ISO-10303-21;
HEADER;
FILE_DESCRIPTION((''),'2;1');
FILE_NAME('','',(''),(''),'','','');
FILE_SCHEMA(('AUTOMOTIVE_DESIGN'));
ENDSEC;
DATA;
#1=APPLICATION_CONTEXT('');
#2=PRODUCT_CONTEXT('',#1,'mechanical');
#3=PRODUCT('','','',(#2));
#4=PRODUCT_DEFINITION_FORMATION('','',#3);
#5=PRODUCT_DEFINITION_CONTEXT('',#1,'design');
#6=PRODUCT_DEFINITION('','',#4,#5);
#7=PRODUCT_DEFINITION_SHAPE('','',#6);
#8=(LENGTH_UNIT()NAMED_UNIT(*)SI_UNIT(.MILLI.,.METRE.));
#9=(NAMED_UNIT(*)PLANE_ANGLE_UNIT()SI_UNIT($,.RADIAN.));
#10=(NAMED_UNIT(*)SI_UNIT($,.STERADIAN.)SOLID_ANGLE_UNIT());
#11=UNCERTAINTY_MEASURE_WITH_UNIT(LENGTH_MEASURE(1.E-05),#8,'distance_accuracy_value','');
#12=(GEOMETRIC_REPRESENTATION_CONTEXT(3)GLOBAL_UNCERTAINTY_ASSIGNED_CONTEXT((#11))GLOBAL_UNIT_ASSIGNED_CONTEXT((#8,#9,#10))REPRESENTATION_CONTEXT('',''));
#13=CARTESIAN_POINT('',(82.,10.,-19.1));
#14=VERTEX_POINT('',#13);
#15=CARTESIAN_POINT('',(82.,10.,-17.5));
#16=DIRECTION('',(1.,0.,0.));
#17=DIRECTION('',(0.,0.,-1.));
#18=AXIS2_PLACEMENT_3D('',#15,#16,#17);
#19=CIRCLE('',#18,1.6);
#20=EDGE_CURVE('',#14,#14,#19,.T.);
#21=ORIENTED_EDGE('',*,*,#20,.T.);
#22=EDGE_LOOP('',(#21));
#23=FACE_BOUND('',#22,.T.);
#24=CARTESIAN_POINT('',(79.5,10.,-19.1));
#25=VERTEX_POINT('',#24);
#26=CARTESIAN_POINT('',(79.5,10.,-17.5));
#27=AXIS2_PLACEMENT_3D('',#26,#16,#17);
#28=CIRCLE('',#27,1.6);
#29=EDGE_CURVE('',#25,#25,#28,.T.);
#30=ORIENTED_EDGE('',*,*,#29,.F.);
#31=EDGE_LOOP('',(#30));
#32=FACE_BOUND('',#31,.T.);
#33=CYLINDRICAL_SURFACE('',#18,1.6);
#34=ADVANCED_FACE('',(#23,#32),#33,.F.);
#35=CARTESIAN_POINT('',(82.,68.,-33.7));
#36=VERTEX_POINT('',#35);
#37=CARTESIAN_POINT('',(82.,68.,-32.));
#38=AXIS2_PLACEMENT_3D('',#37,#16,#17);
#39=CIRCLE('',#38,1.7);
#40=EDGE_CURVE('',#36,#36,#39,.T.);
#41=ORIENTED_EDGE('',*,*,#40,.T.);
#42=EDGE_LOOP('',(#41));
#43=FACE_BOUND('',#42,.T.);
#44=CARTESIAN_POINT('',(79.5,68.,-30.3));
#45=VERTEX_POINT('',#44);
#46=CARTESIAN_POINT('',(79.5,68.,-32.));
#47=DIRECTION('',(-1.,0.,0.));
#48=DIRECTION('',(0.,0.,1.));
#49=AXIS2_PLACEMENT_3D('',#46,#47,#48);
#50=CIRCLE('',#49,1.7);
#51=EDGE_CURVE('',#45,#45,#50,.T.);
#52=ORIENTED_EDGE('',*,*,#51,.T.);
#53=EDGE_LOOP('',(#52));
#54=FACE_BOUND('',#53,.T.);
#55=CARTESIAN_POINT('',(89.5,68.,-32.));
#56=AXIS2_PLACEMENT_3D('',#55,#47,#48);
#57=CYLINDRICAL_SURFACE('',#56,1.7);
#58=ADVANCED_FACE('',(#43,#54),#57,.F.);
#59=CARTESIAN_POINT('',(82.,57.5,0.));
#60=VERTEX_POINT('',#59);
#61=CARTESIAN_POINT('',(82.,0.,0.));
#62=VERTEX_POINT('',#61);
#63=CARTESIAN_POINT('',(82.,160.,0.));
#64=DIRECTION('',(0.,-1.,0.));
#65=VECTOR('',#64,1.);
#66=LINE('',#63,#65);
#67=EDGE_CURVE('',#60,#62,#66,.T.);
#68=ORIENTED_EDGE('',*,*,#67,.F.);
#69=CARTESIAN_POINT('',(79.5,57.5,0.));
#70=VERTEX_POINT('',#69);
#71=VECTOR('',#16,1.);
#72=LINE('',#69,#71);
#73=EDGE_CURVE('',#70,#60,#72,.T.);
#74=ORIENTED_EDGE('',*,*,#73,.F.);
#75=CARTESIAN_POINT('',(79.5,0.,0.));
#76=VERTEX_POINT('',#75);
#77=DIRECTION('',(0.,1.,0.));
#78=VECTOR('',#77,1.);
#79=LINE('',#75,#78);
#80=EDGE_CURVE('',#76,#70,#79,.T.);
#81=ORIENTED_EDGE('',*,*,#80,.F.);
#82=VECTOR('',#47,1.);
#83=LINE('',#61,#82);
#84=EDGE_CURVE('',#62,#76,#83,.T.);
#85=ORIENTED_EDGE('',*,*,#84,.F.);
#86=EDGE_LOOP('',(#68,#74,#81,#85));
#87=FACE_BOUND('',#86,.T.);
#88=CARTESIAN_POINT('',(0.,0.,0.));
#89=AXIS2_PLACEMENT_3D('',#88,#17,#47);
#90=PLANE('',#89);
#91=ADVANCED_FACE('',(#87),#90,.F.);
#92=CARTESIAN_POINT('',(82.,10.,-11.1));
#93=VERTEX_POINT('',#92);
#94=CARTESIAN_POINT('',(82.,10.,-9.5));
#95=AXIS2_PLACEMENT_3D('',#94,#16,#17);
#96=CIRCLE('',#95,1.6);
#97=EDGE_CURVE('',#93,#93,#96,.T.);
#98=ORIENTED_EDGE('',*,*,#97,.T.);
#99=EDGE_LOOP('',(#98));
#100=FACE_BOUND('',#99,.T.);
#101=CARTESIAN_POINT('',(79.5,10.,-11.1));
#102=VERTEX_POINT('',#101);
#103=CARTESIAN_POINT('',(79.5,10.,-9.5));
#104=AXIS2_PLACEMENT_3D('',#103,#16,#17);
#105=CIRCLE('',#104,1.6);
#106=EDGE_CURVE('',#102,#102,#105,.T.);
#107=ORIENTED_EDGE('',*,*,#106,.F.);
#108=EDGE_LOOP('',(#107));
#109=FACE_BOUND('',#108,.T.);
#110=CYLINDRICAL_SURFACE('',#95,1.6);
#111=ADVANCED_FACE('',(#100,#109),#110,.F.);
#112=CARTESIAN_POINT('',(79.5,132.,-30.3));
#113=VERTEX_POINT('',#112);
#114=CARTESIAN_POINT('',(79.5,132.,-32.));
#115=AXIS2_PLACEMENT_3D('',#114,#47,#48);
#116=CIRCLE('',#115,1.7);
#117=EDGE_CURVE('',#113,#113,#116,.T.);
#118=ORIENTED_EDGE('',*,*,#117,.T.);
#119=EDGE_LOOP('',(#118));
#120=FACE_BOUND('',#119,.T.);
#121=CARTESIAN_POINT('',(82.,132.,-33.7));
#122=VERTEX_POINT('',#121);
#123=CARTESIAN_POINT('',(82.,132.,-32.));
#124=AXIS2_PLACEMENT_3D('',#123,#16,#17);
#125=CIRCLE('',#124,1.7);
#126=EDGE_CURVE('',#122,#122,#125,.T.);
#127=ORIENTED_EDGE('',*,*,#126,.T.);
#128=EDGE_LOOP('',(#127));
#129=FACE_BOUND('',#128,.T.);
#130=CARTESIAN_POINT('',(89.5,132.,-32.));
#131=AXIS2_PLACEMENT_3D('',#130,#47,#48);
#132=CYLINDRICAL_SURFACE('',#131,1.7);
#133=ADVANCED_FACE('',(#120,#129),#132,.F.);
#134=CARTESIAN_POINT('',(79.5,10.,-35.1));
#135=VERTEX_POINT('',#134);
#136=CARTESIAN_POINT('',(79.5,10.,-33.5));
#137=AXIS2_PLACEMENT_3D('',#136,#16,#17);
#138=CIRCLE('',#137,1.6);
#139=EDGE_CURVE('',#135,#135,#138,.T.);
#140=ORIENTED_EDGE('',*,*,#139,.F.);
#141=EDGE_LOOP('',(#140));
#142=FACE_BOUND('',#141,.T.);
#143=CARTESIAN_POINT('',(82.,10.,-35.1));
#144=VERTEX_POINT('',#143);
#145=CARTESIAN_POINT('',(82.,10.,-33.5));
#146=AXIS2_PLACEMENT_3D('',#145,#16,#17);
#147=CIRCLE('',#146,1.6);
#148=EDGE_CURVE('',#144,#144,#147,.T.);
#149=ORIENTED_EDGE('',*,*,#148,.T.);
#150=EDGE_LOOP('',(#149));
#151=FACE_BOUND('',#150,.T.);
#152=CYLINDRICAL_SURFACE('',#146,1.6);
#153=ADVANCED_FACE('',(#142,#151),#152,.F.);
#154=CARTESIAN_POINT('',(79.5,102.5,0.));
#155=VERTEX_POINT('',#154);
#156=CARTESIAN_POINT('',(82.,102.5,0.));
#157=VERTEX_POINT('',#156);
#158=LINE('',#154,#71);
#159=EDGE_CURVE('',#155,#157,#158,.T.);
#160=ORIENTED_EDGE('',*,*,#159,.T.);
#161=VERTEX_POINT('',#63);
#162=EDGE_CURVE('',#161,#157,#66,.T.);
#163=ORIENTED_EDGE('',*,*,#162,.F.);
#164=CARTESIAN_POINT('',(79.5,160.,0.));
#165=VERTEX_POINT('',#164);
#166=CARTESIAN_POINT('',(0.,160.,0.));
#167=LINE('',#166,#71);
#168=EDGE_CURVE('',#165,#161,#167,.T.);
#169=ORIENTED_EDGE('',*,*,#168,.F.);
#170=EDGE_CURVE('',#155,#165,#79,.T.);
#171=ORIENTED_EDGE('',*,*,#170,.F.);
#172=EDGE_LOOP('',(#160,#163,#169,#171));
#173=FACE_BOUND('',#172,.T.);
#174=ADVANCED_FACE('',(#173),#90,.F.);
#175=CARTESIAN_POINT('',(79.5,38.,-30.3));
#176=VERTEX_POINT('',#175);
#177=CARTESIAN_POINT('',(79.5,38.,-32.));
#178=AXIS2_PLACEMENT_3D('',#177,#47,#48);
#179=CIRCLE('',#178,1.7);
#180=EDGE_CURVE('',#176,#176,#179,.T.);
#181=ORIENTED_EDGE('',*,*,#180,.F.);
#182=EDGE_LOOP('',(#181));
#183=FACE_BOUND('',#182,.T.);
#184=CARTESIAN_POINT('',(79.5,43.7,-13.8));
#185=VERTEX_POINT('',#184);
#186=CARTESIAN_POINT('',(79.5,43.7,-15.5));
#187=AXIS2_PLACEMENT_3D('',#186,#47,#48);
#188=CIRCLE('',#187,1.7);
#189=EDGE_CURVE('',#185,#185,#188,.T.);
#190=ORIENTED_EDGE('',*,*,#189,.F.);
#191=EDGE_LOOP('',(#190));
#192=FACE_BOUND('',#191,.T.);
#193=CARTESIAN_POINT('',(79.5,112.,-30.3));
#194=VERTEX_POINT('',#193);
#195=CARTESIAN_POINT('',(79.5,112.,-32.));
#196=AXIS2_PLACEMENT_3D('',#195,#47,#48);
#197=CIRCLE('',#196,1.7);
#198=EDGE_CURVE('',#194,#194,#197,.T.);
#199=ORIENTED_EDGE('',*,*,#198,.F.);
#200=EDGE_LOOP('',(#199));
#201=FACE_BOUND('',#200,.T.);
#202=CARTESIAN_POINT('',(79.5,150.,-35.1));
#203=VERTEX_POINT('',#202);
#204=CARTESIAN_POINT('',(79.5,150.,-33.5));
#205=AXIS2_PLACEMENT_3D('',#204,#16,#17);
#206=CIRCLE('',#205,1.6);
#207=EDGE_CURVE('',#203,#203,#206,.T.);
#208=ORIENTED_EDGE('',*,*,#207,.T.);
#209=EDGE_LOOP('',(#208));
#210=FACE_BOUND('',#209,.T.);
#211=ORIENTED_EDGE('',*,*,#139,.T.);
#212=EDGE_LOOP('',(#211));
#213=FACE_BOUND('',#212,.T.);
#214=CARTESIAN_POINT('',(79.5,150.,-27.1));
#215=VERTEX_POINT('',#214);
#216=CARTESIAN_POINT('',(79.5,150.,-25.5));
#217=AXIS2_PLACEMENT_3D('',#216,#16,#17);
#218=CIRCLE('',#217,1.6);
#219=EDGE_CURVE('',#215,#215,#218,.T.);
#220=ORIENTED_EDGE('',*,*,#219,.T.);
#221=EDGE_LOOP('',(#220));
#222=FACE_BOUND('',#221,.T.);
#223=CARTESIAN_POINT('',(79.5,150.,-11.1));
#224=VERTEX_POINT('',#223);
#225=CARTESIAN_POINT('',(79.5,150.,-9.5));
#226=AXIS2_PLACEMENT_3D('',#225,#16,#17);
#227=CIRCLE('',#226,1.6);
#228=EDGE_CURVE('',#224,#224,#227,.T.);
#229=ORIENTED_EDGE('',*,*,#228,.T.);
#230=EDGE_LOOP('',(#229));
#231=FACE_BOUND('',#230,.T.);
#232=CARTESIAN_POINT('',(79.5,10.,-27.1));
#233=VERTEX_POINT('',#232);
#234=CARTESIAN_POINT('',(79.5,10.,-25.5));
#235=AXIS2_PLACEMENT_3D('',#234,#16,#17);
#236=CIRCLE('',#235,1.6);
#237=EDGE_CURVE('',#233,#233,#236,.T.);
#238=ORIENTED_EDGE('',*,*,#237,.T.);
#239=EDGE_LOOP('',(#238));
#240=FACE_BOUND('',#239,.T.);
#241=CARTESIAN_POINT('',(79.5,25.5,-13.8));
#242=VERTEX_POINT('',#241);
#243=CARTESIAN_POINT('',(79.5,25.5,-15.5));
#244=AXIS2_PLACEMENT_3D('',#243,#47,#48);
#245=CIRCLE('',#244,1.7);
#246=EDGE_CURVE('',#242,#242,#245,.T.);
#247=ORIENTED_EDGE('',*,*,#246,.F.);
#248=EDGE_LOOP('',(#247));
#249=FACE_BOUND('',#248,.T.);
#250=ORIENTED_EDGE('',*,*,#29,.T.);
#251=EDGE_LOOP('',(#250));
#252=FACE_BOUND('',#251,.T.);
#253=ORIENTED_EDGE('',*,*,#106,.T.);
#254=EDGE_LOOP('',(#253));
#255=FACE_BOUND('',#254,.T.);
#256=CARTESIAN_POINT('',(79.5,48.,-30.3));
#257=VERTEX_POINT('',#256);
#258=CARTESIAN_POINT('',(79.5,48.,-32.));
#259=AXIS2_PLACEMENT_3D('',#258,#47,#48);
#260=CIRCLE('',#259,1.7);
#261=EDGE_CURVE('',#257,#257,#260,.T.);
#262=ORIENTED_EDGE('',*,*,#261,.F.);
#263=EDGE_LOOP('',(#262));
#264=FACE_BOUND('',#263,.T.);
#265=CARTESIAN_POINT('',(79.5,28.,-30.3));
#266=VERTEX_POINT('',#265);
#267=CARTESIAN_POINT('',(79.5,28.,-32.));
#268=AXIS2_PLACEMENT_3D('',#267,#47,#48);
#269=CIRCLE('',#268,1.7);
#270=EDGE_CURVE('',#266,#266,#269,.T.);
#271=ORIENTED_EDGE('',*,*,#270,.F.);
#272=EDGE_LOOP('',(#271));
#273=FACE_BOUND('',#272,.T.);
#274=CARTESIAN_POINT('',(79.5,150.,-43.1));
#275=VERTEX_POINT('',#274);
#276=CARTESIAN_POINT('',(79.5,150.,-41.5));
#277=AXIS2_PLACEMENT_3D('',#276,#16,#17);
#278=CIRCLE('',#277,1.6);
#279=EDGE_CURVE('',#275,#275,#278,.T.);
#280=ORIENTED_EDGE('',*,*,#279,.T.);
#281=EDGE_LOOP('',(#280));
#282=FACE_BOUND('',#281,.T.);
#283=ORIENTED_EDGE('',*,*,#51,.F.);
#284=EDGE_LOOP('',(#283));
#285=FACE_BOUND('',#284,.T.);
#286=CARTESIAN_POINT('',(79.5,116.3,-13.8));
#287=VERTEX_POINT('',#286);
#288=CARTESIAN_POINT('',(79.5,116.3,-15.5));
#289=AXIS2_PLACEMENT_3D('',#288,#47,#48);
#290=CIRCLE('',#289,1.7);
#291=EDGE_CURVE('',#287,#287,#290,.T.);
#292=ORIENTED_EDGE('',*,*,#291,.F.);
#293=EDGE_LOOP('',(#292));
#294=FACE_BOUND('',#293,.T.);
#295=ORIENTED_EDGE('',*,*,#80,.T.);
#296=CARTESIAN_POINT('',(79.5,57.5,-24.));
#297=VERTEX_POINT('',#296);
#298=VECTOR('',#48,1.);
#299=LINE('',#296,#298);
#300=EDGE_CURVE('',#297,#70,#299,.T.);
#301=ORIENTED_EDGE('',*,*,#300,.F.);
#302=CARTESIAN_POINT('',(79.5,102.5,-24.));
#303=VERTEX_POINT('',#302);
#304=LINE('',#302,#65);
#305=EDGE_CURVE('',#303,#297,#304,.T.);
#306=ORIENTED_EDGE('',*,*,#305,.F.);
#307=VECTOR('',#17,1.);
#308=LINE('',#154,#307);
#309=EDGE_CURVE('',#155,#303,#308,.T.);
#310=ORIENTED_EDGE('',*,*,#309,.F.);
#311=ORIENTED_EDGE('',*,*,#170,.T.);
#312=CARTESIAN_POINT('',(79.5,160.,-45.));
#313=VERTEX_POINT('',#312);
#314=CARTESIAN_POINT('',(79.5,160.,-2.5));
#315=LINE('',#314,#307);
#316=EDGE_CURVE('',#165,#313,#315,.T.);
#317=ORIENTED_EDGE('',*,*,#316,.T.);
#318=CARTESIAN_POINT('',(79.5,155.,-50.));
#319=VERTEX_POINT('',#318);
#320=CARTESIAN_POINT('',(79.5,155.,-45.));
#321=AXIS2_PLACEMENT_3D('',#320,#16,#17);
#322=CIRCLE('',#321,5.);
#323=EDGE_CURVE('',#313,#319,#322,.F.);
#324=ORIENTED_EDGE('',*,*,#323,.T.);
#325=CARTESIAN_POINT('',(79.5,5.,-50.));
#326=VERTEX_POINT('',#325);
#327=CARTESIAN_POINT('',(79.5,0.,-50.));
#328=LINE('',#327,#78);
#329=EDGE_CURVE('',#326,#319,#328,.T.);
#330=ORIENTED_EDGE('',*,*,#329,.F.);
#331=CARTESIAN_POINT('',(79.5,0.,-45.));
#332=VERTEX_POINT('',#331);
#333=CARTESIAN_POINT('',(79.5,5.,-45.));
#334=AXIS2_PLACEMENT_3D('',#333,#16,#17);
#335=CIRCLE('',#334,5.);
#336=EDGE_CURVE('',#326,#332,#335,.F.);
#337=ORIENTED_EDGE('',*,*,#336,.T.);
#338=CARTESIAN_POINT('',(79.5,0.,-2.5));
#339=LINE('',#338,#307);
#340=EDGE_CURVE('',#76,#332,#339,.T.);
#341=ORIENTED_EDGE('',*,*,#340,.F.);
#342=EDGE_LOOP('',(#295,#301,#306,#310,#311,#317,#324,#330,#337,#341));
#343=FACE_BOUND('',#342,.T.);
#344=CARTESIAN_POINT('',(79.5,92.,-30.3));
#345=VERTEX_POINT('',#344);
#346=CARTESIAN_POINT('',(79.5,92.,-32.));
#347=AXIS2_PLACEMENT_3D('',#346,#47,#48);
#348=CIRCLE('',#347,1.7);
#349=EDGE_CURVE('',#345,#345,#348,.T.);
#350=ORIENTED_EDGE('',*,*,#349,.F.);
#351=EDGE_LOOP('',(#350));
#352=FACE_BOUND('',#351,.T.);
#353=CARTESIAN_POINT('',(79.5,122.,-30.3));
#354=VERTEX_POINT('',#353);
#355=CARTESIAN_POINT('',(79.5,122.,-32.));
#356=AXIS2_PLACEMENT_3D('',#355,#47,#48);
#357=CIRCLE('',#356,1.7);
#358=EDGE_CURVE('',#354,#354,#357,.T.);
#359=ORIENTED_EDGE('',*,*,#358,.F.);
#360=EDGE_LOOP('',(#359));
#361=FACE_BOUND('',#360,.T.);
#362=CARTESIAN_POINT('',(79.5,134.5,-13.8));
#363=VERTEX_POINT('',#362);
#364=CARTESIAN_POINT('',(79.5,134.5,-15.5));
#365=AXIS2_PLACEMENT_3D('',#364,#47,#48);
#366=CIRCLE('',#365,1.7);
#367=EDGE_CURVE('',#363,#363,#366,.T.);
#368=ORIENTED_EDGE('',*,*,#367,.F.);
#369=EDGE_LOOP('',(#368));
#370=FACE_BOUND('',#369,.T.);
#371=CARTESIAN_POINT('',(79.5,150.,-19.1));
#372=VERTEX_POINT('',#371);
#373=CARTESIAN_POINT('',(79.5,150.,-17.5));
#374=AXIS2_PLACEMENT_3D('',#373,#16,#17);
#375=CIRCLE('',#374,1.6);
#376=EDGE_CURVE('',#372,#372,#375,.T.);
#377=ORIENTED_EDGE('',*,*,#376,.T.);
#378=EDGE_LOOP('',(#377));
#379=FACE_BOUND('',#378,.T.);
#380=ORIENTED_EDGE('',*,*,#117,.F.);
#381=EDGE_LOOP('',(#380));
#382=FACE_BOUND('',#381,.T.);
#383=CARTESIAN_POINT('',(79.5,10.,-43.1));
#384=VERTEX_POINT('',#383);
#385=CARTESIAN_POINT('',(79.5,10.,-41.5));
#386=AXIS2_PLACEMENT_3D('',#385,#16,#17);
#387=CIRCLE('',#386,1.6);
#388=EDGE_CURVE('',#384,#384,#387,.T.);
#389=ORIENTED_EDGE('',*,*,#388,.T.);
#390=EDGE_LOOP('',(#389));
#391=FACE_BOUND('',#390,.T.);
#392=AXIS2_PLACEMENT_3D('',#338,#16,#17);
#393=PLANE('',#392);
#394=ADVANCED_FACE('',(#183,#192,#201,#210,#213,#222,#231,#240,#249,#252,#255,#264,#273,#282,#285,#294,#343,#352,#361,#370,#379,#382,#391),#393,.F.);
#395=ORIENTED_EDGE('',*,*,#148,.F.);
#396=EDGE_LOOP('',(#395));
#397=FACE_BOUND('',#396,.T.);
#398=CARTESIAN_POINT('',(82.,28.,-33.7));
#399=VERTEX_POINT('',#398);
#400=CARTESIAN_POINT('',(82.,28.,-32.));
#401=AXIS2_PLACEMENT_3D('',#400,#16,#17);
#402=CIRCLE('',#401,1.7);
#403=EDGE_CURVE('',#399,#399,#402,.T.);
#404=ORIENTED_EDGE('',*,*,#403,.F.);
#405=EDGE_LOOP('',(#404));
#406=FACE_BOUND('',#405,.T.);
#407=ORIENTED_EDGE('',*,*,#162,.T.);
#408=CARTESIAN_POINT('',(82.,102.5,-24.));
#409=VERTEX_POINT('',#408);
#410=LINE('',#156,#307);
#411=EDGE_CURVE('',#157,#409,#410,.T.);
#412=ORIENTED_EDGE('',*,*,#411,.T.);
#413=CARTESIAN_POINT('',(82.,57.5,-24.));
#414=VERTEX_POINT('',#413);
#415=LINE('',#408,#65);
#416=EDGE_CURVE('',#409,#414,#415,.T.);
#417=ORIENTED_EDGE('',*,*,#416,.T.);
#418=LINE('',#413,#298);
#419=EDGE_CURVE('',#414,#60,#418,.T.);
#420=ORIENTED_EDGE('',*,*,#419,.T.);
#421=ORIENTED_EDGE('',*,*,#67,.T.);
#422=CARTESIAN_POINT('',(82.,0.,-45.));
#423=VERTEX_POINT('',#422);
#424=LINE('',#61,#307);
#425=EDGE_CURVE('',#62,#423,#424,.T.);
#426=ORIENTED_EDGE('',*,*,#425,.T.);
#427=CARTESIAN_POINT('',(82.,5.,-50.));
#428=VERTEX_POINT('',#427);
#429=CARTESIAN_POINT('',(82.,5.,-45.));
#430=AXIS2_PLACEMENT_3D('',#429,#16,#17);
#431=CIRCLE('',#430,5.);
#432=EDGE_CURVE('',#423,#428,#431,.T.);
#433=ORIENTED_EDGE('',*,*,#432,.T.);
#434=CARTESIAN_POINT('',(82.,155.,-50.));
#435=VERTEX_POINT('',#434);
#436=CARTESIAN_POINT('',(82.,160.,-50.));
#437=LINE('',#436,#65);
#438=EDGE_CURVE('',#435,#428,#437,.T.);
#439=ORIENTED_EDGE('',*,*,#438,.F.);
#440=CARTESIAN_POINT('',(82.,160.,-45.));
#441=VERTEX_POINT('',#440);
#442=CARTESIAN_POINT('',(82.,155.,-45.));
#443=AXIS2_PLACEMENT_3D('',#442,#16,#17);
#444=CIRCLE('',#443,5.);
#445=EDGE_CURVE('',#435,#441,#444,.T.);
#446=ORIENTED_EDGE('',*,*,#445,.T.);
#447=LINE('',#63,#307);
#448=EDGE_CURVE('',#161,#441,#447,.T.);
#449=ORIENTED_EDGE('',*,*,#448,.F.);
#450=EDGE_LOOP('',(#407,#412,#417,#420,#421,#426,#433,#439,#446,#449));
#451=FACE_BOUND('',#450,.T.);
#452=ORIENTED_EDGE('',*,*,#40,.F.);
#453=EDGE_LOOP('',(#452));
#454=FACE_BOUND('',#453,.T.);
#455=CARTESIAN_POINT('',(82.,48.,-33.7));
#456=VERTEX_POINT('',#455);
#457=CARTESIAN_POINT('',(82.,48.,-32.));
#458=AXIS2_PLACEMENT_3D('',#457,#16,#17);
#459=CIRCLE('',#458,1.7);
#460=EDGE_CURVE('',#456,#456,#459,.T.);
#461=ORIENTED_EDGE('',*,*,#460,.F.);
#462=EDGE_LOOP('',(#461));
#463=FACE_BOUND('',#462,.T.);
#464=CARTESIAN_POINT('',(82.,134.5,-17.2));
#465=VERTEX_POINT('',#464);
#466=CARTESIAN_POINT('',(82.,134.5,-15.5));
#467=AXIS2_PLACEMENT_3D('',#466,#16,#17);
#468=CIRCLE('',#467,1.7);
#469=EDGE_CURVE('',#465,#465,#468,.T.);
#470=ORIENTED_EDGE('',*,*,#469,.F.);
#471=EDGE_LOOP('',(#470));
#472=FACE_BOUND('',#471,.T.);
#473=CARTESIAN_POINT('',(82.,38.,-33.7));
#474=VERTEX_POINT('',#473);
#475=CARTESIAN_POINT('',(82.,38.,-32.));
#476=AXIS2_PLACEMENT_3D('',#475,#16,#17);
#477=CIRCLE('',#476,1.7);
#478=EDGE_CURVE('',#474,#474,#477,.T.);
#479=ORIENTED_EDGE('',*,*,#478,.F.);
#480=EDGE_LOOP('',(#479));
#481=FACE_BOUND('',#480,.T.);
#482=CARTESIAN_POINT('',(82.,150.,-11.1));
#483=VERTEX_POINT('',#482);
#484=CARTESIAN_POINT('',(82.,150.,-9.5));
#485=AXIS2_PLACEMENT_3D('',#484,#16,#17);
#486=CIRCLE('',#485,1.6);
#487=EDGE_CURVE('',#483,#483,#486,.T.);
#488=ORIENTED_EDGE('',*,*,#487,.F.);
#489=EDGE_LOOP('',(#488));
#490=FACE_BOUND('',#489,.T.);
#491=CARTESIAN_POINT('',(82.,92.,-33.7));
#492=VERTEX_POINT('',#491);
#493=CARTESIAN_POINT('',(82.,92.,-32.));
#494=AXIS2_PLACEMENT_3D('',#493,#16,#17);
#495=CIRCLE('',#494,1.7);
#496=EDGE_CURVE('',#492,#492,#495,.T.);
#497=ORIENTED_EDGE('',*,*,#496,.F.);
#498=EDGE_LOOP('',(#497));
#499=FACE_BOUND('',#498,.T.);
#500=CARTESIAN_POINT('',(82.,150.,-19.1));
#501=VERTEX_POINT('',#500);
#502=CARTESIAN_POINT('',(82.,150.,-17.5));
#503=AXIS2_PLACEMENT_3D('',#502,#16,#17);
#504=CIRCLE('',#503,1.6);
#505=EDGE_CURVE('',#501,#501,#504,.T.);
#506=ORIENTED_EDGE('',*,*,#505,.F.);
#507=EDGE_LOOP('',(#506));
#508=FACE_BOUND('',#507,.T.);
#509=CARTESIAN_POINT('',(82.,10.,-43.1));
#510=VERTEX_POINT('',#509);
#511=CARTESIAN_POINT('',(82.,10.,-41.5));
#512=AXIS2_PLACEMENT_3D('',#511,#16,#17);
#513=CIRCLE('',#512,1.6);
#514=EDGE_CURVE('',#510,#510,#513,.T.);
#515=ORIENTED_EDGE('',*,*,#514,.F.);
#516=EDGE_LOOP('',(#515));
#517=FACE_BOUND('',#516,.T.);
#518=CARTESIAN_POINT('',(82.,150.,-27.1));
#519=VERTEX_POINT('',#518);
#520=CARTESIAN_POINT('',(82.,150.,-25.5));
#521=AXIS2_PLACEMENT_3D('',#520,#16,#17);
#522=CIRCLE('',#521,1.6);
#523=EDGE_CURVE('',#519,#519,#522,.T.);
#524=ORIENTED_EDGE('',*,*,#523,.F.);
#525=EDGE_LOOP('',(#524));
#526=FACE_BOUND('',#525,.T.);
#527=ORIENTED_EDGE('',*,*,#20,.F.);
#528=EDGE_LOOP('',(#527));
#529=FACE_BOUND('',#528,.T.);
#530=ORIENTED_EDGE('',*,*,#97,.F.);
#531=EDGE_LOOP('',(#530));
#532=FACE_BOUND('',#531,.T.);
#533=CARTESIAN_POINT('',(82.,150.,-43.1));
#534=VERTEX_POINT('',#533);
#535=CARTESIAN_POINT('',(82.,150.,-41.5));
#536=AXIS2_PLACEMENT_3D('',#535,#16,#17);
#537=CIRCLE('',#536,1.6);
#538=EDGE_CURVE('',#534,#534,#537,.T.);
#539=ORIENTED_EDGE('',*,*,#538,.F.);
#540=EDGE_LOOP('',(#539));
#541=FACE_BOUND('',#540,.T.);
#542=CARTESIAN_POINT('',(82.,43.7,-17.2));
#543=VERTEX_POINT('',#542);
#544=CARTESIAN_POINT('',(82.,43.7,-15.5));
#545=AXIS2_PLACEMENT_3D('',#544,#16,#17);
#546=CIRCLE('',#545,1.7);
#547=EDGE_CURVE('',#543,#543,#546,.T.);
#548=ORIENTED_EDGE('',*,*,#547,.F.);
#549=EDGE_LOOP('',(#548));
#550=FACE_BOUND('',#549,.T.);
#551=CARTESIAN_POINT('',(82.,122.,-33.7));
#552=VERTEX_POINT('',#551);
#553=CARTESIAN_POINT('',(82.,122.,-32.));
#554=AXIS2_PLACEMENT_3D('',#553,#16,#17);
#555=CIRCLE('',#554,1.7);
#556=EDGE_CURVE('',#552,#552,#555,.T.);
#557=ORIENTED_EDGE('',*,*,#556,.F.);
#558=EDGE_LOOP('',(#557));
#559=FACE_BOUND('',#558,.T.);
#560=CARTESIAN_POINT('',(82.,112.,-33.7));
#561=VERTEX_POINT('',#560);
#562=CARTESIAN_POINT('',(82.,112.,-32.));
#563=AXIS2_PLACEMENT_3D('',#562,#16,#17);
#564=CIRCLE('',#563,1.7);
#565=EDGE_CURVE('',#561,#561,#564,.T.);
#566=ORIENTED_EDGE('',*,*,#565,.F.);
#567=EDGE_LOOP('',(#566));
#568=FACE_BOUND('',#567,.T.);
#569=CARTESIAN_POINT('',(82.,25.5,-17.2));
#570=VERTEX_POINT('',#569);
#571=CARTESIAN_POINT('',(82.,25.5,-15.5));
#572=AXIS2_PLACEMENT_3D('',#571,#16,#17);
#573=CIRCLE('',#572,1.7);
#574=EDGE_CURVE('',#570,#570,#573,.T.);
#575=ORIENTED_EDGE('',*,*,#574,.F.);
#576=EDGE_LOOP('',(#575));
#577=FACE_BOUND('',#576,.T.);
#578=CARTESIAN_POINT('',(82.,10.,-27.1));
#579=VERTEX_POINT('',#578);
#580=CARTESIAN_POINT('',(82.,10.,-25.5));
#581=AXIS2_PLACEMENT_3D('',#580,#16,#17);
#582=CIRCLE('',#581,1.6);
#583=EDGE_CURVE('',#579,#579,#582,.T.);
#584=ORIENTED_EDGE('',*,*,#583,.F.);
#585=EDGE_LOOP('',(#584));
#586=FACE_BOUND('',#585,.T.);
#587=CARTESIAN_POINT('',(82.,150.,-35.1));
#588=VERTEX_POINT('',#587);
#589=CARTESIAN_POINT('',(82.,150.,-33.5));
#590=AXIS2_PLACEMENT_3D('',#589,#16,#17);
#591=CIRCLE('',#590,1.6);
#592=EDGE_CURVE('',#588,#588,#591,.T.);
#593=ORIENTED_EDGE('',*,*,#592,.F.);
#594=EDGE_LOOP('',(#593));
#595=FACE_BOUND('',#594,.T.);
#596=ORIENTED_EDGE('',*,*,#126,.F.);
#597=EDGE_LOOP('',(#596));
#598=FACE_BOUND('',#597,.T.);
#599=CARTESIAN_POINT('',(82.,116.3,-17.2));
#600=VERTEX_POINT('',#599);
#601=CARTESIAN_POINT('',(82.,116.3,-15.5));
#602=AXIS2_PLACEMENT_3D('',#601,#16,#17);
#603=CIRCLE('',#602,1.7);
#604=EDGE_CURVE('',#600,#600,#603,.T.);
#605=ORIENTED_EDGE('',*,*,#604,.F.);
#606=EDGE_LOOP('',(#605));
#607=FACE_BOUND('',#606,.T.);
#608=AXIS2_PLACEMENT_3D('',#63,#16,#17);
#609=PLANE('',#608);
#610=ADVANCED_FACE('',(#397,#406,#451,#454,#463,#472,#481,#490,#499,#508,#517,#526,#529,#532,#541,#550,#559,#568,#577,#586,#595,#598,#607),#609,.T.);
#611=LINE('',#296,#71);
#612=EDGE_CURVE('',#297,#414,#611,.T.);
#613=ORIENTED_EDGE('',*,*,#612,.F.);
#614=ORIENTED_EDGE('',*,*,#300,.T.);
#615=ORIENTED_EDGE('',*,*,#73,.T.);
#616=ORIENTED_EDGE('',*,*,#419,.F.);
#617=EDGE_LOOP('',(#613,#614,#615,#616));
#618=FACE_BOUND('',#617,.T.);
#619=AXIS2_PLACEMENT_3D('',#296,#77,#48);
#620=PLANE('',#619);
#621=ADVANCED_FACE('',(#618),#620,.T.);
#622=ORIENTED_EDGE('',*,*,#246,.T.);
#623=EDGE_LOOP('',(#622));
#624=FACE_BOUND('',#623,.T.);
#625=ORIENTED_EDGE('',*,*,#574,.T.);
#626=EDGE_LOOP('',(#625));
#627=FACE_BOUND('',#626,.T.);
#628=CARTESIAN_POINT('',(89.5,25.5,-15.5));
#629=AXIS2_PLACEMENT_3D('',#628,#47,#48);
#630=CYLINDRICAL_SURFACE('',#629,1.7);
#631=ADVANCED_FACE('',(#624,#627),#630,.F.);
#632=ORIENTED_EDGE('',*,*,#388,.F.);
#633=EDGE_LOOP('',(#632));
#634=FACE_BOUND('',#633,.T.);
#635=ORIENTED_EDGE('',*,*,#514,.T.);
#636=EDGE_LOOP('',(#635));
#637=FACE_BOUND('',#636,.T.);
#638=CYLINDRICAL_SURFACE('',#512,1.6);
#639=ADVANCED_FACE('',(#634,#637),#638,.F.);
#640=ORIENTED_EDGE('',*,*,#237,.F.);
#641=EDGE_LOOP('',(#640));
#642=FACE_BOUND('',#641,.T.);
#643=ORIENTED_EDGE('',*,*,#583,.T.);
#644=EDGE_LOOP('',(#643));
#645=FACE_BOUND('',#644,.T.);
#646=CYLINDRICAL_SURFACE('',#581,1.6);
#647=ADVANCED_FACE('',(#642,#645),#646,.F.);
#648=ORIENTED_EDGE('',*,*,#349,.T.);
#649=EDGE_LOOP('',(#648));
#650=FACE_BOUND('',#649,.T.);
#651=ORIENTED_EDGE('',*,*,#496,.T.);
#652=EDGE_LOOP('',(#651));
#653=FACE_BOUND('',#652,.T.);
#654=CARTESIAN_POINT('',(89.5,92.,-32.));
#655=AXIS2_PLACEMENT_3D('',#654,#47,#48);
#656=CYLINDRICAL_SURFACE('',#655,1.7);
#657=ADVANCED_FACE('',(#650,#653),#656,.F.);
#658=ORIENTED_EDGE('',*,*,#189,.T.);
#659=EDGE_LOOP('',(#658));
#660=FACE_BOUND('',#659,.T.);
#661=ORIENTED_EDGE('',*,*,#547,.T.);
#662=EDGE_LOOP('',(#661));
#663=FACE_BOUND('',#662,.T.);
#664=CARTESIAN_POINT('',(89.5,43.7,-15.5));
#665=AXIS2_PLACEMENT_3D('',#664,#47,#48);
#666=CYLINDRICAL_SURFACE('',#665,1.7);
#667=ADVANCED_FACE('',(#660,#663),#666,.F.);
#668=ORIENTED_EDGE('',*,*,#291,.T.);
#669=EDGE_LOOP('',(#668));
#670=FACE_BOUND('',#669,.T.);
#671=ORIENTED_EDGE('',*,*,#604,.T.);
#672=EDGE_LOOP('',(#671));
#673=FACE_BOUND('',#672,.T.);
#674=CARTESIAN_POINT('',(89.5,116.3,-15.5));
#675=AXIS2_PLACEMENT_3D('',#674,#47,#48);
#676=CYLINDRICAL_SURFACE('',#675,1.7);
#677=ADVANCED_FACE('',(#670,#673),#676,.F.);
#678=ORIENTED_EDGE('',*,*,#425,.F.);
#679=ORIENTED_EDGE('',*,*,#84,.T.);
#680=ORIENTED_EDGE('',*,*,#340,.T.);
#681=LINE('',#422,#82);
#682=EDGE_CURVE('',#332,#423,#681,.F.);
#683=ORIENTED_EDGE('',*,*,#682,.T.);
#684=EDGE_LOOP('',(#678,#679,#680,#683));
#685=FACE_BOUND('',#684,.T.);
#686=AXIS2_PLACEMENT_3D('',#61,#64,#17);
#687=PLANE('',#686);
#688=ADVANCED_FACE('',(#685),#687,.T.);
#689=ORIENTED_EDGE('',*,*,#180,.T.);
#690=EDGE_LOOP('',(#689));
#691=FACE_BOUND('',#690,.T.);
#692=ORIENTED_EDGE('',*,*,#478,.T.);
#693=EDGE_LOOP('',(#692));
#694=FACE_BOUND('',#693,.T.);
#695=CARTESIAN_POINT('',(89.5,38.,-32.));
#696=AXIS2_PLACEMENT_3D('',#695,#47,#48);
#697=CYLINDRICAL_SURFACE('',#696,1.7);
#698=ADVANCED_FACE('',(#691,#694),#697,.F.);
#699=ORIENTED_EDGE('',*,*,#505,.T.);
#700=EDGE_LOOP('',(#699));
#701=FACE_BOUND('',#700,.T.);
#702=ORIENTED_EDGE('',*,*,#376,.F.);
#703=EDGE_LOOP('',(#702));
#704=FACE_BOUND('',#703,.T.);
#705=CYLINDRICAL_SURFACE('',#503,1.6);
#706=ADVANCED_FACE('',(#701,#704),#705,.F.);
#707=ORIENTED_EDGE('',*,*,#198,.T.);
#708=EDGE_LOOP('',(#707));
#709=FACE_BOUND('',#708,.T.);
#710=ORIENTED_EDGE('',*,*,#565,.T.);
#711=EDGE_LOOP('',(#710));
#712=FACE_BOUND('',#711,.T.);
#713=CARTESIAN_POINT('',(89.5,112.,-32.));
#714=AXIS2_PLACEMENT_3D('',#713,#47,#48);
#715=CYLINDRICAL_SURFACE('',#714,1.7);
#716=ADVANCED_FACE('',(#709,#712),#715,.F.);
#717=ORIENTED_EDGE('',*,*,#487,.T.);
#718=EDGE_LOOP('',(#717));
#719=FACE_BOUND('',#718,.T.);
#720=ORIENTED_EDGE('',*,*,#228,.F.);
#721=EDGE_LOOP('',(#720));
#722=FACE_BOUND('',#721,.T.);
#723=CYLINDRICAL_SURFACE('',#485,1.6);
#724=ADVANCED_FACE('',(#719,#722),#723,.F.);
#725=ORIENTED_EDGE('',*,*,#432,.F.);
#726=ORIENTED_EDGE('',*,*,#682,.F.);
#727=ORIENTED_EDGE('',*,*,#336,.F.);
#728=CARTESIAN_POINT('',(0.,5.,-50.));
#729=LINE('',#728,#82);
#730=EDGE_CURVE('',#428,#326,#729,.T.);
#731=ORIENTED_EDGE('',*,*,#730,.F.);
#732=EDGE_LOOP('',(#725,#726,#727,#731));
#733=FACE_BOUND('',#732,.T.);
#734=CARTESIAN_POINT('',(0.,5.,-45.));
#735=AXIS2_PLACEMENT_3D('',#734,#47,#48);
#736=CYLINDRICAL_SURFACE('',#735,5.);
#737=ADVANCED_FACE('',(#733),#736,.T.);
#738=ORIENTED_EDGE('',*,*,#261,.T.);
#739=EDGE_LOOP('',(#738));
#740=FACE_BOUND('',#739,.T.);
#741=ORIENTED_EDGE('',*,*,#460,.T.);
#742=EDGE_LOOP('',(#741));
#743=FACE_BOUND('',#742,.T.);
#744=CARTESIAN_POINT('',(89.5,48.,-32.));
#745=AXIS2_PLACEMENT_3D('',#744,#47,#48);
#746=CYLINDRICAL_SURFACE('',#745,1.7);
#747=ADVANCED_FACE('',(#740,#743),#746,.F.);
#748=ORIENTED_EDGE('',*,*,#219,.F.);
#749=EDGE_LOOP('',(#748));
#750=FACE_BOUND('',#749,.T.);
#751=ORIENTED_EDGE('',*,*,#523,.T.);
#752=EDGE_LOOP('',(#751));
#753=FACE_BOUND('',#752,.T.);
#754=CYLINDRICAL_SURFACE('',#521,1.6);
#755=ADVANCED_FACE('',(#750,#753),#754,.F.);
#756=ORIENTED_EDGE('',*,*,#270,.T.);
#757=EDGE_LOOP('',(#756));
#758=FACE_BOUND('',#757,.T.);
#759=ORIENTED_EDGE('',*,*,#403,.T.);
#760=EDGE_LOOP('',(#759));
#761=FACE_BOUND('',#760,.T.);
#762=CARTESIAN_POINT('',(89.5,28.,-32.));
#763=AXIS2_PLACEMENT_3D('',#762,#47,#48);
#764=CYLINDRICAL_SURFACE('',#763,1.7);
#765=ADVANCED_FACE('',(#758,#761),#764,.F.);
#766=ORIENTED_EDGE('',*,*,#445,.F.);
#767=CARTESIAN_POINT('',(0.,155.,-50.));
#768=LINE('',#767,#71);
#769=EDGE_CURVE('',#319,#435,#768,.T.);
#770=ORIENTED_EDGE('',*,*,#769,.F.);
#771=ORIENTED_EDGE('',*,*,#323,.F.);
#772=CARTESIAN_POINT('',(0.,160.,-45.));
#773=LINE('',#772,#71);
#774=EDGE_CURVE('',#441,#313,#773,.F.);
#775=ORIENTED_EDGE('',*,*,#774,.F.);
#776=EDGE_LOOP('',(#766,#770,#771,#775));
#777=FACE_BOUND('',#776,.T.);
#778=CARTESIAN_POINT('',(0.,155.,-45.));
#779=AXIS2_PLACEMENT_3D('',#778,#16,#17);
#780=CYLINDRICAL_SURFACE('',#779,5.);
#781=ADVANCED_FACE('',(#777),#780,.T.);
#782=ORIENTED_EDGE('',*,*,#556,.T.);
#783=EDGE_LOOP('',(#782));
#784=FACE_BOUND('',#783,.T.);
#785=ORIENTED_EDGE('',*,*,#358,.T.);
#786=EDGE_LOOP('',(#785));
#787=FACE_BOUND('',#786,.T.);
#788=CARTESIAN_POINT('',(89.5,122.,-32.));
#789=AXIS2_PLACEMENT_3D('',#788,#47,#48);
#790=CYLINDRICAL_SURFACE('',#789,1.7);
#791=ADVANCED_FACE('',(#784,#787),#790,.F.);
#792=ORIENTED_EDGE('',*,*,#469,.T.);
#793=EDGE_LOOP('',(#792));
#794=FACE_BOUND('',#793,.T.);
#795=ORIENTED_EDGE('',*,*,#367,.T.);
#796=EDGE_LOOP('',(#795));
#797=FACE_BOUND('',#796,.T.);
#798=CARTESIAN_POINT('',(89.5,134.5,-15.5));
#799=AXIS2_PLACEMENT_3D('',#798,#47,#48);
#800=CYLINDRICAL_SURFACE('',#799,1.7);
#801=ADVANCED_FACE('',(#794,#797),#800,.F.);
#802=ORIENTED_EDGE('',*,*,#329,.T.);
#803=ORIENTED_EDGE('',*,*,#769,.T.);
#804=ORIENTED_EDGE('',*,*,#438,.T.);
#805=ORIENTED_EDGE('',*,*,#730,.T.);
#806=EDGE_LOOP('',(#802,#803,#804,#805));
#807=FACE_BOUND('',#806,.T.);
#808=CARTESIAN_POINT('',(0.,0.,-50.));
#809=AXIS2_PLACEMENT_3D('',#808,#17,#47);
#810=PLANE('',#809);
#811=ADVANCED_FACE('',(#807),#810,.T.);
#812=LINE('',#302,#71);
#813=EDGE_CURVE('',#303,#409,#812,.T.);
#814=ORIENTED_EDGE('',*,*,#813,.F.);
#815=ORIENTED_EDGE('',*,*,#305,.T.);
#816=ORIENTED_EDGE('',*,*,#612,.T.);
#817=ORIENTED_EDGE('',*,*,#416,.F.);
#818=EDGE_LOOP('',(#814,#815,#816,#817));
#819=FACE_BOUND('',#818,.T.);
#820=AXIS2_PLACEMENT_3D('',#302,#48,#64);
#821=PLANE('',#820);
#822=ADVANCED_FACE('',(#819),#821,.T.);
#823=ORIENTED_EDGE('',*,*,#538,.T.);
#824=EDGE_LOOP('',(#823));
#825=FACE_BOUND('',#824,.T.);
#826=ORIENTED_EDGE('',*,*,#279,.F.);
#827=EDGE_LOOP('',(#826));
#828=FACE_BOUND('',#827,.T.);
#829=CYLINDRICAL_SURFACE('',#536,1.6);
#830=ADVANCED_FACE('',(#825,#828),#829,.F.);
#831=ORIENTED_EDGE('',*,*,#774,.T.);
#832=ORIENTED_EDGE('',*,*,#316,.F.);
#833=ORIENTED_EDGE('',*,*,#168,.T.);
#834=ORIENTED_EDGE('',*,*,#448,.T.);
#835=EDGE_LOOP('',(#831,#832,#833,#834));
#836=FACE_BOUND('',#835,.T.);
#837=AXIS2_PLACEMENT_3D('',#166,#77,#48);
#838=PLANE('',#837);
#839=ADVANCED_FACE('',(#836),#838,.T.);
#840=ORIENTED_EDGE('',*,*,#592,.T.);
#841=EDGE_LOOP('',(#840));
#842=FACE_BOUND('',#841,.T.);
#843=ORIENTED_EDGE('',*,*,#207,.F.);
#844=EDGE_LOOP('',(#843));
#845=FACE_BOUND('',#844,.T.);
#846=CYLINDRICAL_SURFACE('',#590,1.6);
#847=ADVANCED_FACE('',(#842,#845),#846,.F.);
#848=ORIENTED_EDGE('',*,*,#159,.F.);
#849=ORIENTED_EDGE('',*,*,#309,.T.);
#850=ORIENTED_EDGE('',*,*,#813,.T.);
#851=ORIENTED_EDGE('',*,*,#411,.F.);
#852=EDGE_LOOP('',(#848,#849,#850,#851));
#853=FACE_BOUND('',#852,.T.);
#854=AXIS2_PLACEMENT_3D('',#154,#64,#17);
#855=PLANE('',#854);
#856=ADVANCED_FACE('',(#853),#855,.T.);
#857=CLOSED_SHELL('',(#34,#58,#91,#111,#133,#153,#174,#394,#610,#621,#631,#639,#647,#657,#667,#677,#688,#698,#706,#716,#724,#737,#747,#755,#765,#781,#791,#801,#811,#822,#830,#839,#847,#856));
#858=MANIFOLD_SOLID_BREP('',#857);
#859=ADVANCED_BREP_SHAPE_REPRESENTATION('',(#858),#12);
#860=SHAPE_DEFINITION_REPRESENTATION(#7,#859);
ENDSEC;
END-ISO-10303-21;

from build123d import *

# Parameters (mm, degrees)
SKETCH_1_W                  = 82
SKETCH_1_H                  = 160
EXTRUDE_1_DEPTH             = 50
SKETCH_2_W                  = 79.5
SKETCH_2_H                  = 47.5
CUT_EXTRUDE_1_DEPTH         = 187.611896727
CUT_EXTRUDE_2_DEPTH         = 186.95765647
CUT_EXTRUDE_3_DEPTH         = 186.95765647
CUT_EXTRUDE_4_DEPTH         = 186.95765647
CUT_EXTRUDE_5_DEPTH         = 186.95765647
CUT_EXTRUDE_6_DEPTH         = 186.95765647
CUT_EXTRUDE_7_DEPTH         = 186.95765647
CUT_EXTRUDE_8_DEPTH         = 186.95765647
CUT_EXTRUDE_9_DEPTH         = 187.611896727
CUT_EXTRUDE_10_DEPTH        = 187.611896727
CUT_EXTRUDE_11_DEPTH        = 187.611896727
CUT_EXTRUDE_12_DEPTH        = 187.611896727
CUT_EXTRUDE_13_DEPTH        = 187.611896727
CUT_EXTRUDE_14_DEPTH        = 187.611896727
CUT_EXTRUDE_15_DEPTH        = 187.611896727
CUT_EXTRUDE_16_DEPTH        = 187.611896727
CUT_EXTRUDE_17_DEPTH        = 187.611896727
CUT_EXTRUDE_18_DEPTH        = 187.611896727
CUT_EXTRUDE_19_DEPTH        = 187.611896727
CUT_EXTRUDE_20_DEPTH        = 187.611896727
HOLE_WIZARD_3_2_3_2_1_D     = 3.2
HOLE_WIZARD_3_2_3_2_1_DEPTH = 50
FILLET_START                = -2.5
FILLET_3_OUTLINE_R          = 1.7
FILLET_3_OUTLINE_R_2        = 2.5
FILLET_3_DEPTH              = 2.5
FILLET_START_2              = 2.9766
FILLET_3_2_OUTLINE_R        = 1.6
FILLET_3_2_DEPTH            = 80.0234
SKETCH_30_W                 = 2.5
SKETCH_30_H                 = 160
CUT_EXTRUDE_21_DEPTH        = 132
SKETCH_32_R                 = 1.7
CUT_EXTRUDE_22_DEPTH        = 10
SKETCH_33_R                 = 1.7
CUT_EXTRUDE_23_DEPTH        = 10
SKETCH_38_W                 = 28.294736035
SKETCH_38_H                 = 5.600607545
SKETCH_38_W_2               = 28.965642147
SKETCH_38_H_2               = 14.371074317
SKETCH_38_W_3               = 26.69564561
SKETCH_38_H_3               = 6.403188365
SKETCH_38_W_4               = 27.042946808
SKETCH_38_H_4               = 4.713568993
SKETCH_38_W_5               = 27.218337555
SKETCH_38_H_5               = 14.471497388
SKETCH_38_W_6               = 27.711201197
SKETCH_38_H_6               = 6.014834368
SKETCH_38_W_7               = 34.73726222
SKETCH_38_H_7               = 47.004617059
EXTRUDE_2_DEPTH             = 2.5
SKETCH_39_R                 = 1.7
CUT_EXTRUDE_24_DEPTH        = 10
SKETCH_40_R                 = 1.7
CUT_EXTRUDE_25_DEPTH        = 10
SKETCH_41_R                 = 1.7
CUT_EXTRUDE_26_DEPTH        = 10
SKETCH_42_R                 = 1.7
CUT_EXTRUDE_27_DEPTH        = 10
CUT_EXTRUDE_30_DEPTH        = 168.649187293


with BuildPart() as part:
    # 草图1 → 凸台-拉伸1 (new body)
    with BuildSketch(Plane(origin=(0, 0, -50), x_dir=(-1, 0, 0), z_dir=(0, 0, -1))):
        with Locations((-41, 80)):
            Rectangle(SKETCH_1_W, SKETCH_1_H)
    extrude(amount=-EXTRUDE_1_DEPTH)

    # 草图2 → 切除-拉伸1 (cut, through all)
    with BuildSketch(Plane(origin=(0, 160, 0), x_dir=(-1, 0, 0), z_dir=(0, 1, 0))):
        with Locations((-39.75, -26.25)):
            Rectangle(SKETCH_2_W, SKETCH_2_H)
    extrude(amount=-CUT_EXTRUDE_1_DEPTH, mode=Mode.SUBTRACT)

    # 草图3 → 切除-拉伸2 (cut, through all)
    with BuildSketch(Plane(origin=(0, 0, -2.5), x_dir=(-1, 0, 0), z_dir=(0, 0, -1))):
        with BuildLine():
            Line((-65, 89.5), (-20, 89.5))
            ThreePointArc((-20, 89.5), (-17.5, 92), (-20, 94.5))
            Line((-20, 94.5), (-65, 94.5))
            ThreePointArc((-65, 94.5), (-67.5, 92), (-65, 89.5))
        make_face()
    extrude(amount=-CUT_EXTRUDE_2_DEPTH, mode=Mode.SUBTRACT)

    # 草图4 → 切除-拉伸3 (cut, through all)
    with BuildSketch(Plane(origin=(0, 0, -2.5), x_dir=(-1, 0, 0), z_dir=(0, 0, -1))):
        with BuildLine():
            Line((-68, 35), (-38, 35))
            ThreePointArc((-38, 35), (-36.4, 36.6), (-38, 38.2))
            Line((-38, 38.2), (-68, 38.2))
            ThreePointArc((-68, 38.2), (-69.6, 36.6), (-68, 35))
        make_face()
    extrude(amount=-CUT_EXTRUDE_3_DEPTH, mode=Mode.SUBTRACT)

    # 草图5 → 切除-拉伸4 (cut, through all)
    with BuildSketch(Plane(origin=(0, 0, -2.5), x_dir=(-1, 0, 0), z_dir=(0, 0, -1))):
        with BuildLine():
            Line((-65, 65.5), (-20, 65.5))
            ThreePointArc((-20, 65.5), (-17.5, 68), (-20, 70.5))
            Line((-20, 70.5), (-65, 70.5))
            ThreePointArc((-65, 70.5), (-67.5, 68), (-65, 65.5))
        make_face()
    extrude(amount=-CUT_EXTRUDE_4_DEPTH, mode=Mode.SUBTRACT)

    # 草图6 → 切除-拉伸5 (cut, through all)
    with BuildSketch(Plane(origin=(0, 0, -2.5), x_dir=(-1, 0, 0), z_dir=(0, 0, -1))):
        with BuildLine():
            Line((-68, 50), (-38, 50))
            ThreePointArc((-38, 50), (-36.4, 51.6), (-38, 53.2))
            Line((-38, 53.2), (-68, 53.2))
            ThreePointArc((-68, 53.2), (-69.6, 51.6), (-68, 50))
        make_face()
    extrude(amount=-CUT_EXTRUDE_5_DEPTH, mode=Mode.SUBTRACT)

    # 草图7 → 切除-拉伸6 (cut, through all)
    with BuildSketch(Plane(origin=(0, 0, -2.5), x_dir=(-1, 0, 0), z_dir=(0, 0, -1))):
        with BuildLine():
            Line((-68, 20), (-38, 20))
            ThreePointArc((-38, 20), (-36.4, 21.6), (-38, 23.2))
            Line((-38, 23.2), (-68, 23.2))
            ThreePointArc((-68, 23.2), (-69.6, 21.6), (-68, 20))
        make_face()
    extrude(amount=-CUT_EXTRUDE_6_DEPTH, mode=Mode.SUBTRACT)

    # 草图8 → 切除-拉伸7 (cut, through all)
    with BuildSketch(Plane(origin=(0, 0, -2.5), x_dir=(-1, 0, 0), z_dir=(0, 0, -1))):
        with BuildLine():
            Line((-68, 106.8), (-38, 106.8))
            ThreePointArc((-38, 106.8), (-36.4, 108.4), (-38, 110))
            Line((-38, 110), (-68, 110))
            ThreePointArc((-68, 110), (-69.6, 108.4), (-68, 106.8))
        make_face()
    extrude(amount=-CUT_EXTRUDE_7_DEPTH, mode=Mode.SUBTRACT)

    # 草图9 → 切除-拉伸8 (cut, through all)
    with BuildSketch(Plane(origin=(0, 0, -2.5), x_dir=(-1, 0, 0), z_dir=(0, 0, -1))):
        with BuildLine():
            Line((-68, 121.8), (-38, 121.8))
            ThreePointArc((-38, 121.8), (-36.4, 123.4), (-38, 125))
            Line((-38, 125), (-68, 125))
            ThreePointArc((-68, 125), (-69.6, 123.4), (-68, 121.8))
        make_face()
    extrude(amount=-CUT_EXTRUDE_8_DEPTH, mode=Mode.SUBTRACT)

    # 草图10 → 切除-拉伸9 (cut, through all)
    with BuildSketch(Plane(origin=(82, 0, 0), x_dir=(0, 0, -1), z_dir=(1, 0, 0))):
        with BuildLine():
            Line((20.690598923, 80), (16.690598923, 86.92820323))
            ThreePointArc((16.690598923, 86.92820323), (13.629378785, 80), (16.690598923, 73.07179677))
            Line((16.690598923, 73.07179677), (20.690598923, 80))
        make_face()
    extrude(amount=-CUT_EXTRUDE_9_DEPTH, mode=Mode.SUBTRACT)

    # 草图11 → 切除-拉伸10 (cut, through all)
    with BuildSketch(Plane(origin=(82, 0, 0), x_dir=(0, 0, -1), z_dir=(1, 0, 0))):
        with BuildLine():
            Line((20.154700538, 88.92820323), (24.154700538, 82))
            Line((24.154700538, 82), (32.154700538, 82))
            ThreePointArc((32.154700538, 82), (27.685310607, 88.115196021), (20.154700538, 88.92820323))
        make_face()
    extrude(amount=-CUT_EXTRUDE_10_DEPTH, mode=Mode.SUBTRACT)

    # 草图12 → 切除-拉伸11 (cut, through all)
    with BuildSketch(Plane(origin=(82, 0, 0), x_dir=(0, 0, -1), z_dir=(1, 0, 0))):
        with BuildLine():
            Line((24.154700538, 78), (20.154700538, 71.07179677))
            ThreePointArc((20.154700538, 71.07179677), (27.685310607, 71.884803979), (32.154700538, 78))
            Line((32.154700538, 78), (24.154700538, 78))
        make_face()
    extrude(amount=-CUT_EXTRUDE_11_DEPTH, mode=Mode.SUBTRACT)

    # 草图13 → 切除-拉伸12 (cut, through all)
    with BuildSketch(Plane(origin=(82, 0, 0), x_dir=(0, 0, -1), z_dir=(1, 0, 0))):
        with BuildLine():
            Line((36, 21.2), (14, 21.2))
            ThreePointArc((14, 21.2), (12.4, 19.6), (14, 18))
            Line((14, 18), (36, 18))
            ThreePointArc((36, 18), (37.6, 19.6), (36, 21.2))
        make_face()
    extrude(amount=-CUT_EXTRUDE_12_DEPTH, mode=Mode.SUBTRACT)

    # 草图14 → 切除-拉伸13 (cut, through all)
    with BuildSketch(Plane(origin=(82, 0, 0), x_dir=(0, 0, -1), z_dir=(1, 0, 0))):
        with BuildLine():
            Line((36, 31.2), (14, 31.2))
            ThreePointArc((14, 31.2), (12.4, 29.6), (14, 28))
            Line((14, 28), (36, 28))
            ThreePointArc((36, 28), (37.6, 29.6), (36, 31.2))
        make_face()
    extrude(amount=-CUT_EXTRUDE_13_DEPTH, mode=Mode.SUBTRACT)

    # 草图15 → 切除-拉伸14 (cut, through all)
    with BuildSketch(Plane(origin=(82, 0, 0), x_dir=(0, 0, -1), z_dir=(1, 0, 0))):
        with BuildLine():
            Line((36, 41.2), (14, 41.2))
            ThreePointArc((14, 41.2), (12.4, 39.6), (14, 38))
            Line((14, 38), (36, 38))
            ThreePointArc((36, 38), (37.6, 39.6), (36, 41.2))
        make_face()
    extrude(amount=-CUT_EXTRUDE_14_DEPTH, mode=Mode.SUBTRACT)

    # 草图16 → 切除-拉伸15 (cut, through all)
    with BuildSketch(Plane(origin=(82, 0, 0), x_dir=(0, 0, -1), z_dir=(1, 0, 0))):
        with BuildLine():
            Line((36, 51.2), (14, 51.2))
            ThreePointArc((14, 51.2), (12.4, 49.6), (14, 48))
            Line((14, 48), (36, 48))
            ThreePointArc((36, 48), (37.6, 49.6), (36, 51.2))
        make_face()
    extrude(amount=-CUT_EXTRUDE_15_DEPTH, mode=Mode.SUBTRACT)

    # 草图17 → 切除-拉伸16 (cut, through all)
    with BuildSketch(Plane(origin=(82, 0, 0), x_dir=(0, 0, -1), z_dir=(1, 0, 0))):
        with BuildLine():
            Line((36, 112), (14, 112))
            ThreePointArc((14, 112), (12.4, 110.4), (14, 108.8))
            Line((14, 108.8), (36, 108.8))
            ThreePointArc((36, 108.8), (37.6, 110.4), (36, 112))
        make_face()
    extrude(amount=-CUT_EXTRUDE_16_DEPTH, mode=Mode.SUBTRACT)

    # 草图18 → 切除-拉伸17 (cut, through all)
    with BuildSketch(Plane(origin=(82, 0, 0), x_dir=(0, 0, -1), z_dir=(1, 0, 0))):
        with BuildLine():
            Line((36, 122), (14, 122))
            ThreePointArc((14, 122), (12.4, 120.4), (14, 118.8))
            Line((14, 118.8), (36, 118.8))
            ThreePointArc((36, 118.8), (37.6, 120.4), (36, 122))
        make_face()
    extrude(amount=-CUT_EXTRUDE_17_DEPTH, mode=Mode.SUBTRACT)

    # 草图19 → 切除-拉伸18 (cut, through all)
    with BuildSketch(Plane(origin=(82, 0, 0), x_dir=(0, 0, -1), z_dir=(1, 0, 0))):
        with BuildLine():
            Line((36, 132), (14, 132))
            ThreePointArc((14, 132), (12.4, 130.4), (14, 128.8))
            Line((14, 128.8), (36, 128.8))
            ThreePointArc((36, 128.8), (37.6, 130.4), (36, 132))
        make_face()
    extrude(amount=-CUT_EXTRUDE_18_DEPTH, mode=Mode.SUBTRACT)

    # 草图20 → 切除-拉伸19 (cut, through all)
    with BuildSketch(Plane(origin=(82, 0, 0), x_dir=(0, 0, -1), z_dir=(1, 0, 0))):
        with BuildLine():
            Line((36, 142), (14, 142))
            ThreePointArc((14, 142), (12.4, 140.4), (14, 138.8))
            Line((14, 138.8), (36, 138.8))
            ThreePointArc((36, 138.8), (37.6, 140.4), (36, 142))
        make_face()
    extrude(amount=-CUT_EXTRUDE_19_DEPTH, mode=Mode.SUBTRACT)

    # 草图21 → 切除-拉伸20 (cut, through all)
    with BuildSketch(Plane.XY):
        with BuildLine():
            Line((68, 140), (38, 140))
            ThreePointArc((38, 140), (36.4, 138.4), (38, 136.8))
            Line((38, 136.8), (68, 136.8))
            ThreePointArc((68, 136.8), (69.6, 138.4), (68, 140))
        make_face()
    extrude(amount=-CUT_EXTRUDE_20_DEPTH, mode=Mode.SUBTRACT)

    # Ø3.2 (3.2) 直径孔1
    with Locations(Plane.XY):
        with Locations((30, 32.75), (30, 38.75), (30, 50)):
            Hole(HOLE_WIZARD_3_2_3_2_1_D / 2, depth=HOLE_WIZARD_3_2_3_2_1_DEPTH)

    # 圆角3: read off the stored shape, not the designer's step
    # 圆角3 outline → 圆角3 (cut)
    with BuildSketch(Plane.XY.offset(FILLET_START)):
        with Locations((22, 35.75)):
            Circle(FILLET_3_OUTLINE_R)
        with Locations((22, 124.25)):
            Circle(FILLET_3_OUTLINE_R)
        with Locations((19, 152)):
            Circle(FILLET_3_OUTLINE_R)
        with Locations((12, 107)):
            Circle(FILLET_3_OUTLINE_R)
        with Locations((12, 53)):
            Circle(FILLET_3_OUTLINE_R)
        with Locations((19, 145)):
            Circle(FILLET_3_OUTLINE_R)
        with Locations((19, 15)):
            Circle(FILLET_3_OUTLINE_R)
        with Locations((19, 8)):
            Circle(FILLET_3_OUTLINE_R)
        with Locations((30, 110)):
            Circle(FILLET_3_OUTLINE_R)
        with Locations((30, 127.25)):
            Circle(FILLET_3_OUTLINE_R)
        with Locations((30, 121.25)):
            Circle(FILLET_3_OUTLINE_R)
        with Locations((30, 6)):
            Circle(FILLET_3_OUTLINE_R)
        with Locations((40.5, 6)):
            Circle(FILLET_3_OUTLINE_R)
        with Locations((69.5, 6)):
            Circle(FILLET_3_OUTLINE_R)
        with Locations((69.5, 154)):
            Circle(FILLET_3_OUTLINE_R)
        with Locations((40.5, 154)):
            Circle(FILLET_3_OUTLINE_R)
        with Locations((30, 154)):
            Circle(FILLET_3_OUTLINE_R)
        with Locations((6, 143)):
            Circle(FILLET_3_OUTLINE_R_2)
        with Locations((6, 118)):
            Circle(FILLET_3_OUTLINE_R_2)
        with Locations((6, 42)):
            Circle(FILLET_3_OUTLINE_R_2)
        with Locations((6, 17)):
            Circle(FILLET_3_OUTLINE_R_2)
        with BuildLine():
            Line((0, 160), (0, 155))
            ThreePointArc((0, 155), (1.464466094, 158.535533906), (5, 160))
            Line((5, 160), (0, 160))
        make_face()
        with BuildLine():
            ThreePointArc((5, 0), (1.464466094, 1.464466094), (0, 5))
            Line((0, 5), (0, 0))
            Line((0, 0), (5, 0))
        make_face()
    extrude(amount=FILLET_3_DEPTH, mode=Mode.SUBTRACT)

    # Fillet 3 2 outline → Fillet 3 2 (cut)
    with BuildSketch(Plane.YZ.offset(FILLET_START_2)):
        with Locations((70, -10.5)):
            Circle(FILLET_3_2_OUTLINE_R)
        with Locations((60, -23)):
            Circle(FILLET_3_2_OUTLINE_R)
        with Locations((70, -35.5)):
            Circle(FILLET_3_2_OUTLINE_R)
        with Locations((10, -9.5)):
            Circle(FILLET_3_2_OUTLINE_R)
        with Locations((90, -35.5)):
            Circle(FILLET_3_2_OUTLINE_R)
        with Locations((100, -23)):
            Circle(FILLET_3_2_OUTLINE_R)
        with Locations((90, -10.5)):
            Circle(FILLET_3_2_OUTLINE_R)
        with Locations((10, -17.5)):
            Circle(FILLET_3_2_OUTLINE_R)
        with Locations((10, -25.5)):
            Circle(FILLET_3_2_OUTLINE_R)
        with Locations((10, -33.5)):
            Circle(FILLET_3_2_OUTLINE_R)
        with Locations((10, -41.5)):
            Circle(FILLET_3_2_OUTLINE_R)
        with Locations((150, -41.5)):
            Circle(FILLET_3_2_OUTLINE_R)
        with Locations((150, -33.5)):
            Circle(FILLET_3_2_OUTLINE_R)
        with Locations((150, -25.5)):
            Circle(FILLET_3_2_OUTLINE_R)
        with Locations((150, -17.5)):
            Circle(FILLET_3_2_OUTLINE_R)
        with Locations((150, -9.5)):
            Circle(FILLET_3_2_OUTLINE_R)
        with BuildLine():
            ThreePointArc((160, -45), (158.535533906, -48.535533906), (155, -50))
            Line((155, -50), (160, -50))
            Line((160, -50), (160, -45))
        make_face()
        with BuildLine():
            Line((0, -50), (5, -50))
            ThreePointArc((5, -50), (1.464466094, -48.535533906), (0, -45))
            Line((0, -45), (0, -50))
        make_face()
    extrude(amount=FILLET_3_2_DEPTH, mode=Mode.SUBTRACT)

    # 草图30 → 切除-拉伸21 (cut)
    with BuildSketch(Plane.ZY.offset(-79.5)):
        with Locations((-1.25, 80)):
            Rectangle(SKETCH_30_W, SKETCH_30_H)
    extrude(amount=CUT_EXTRUDE_21_DEPTH, mode=Mode.SUBTRACT)

    # 草图32 → 切除-拉伸22 (cut)
    with BuildSketch(Plane.ZY.offset(-79.5)):
        with Locations((-15.5, 134.5)):
            Circle(SKETCH_32_R)
        with Locations((-15.5, 116.3)):
            Circle(SKETCH_32_R)
    extrude(amount=-CUT_EXTRUDE_22_DEPTH, mode=Mode.SUBTRACT)

    # 草图33 → 切除-拉伸23 (cut)
    with BuildSketch(Plane.ZY.offset(-79.5)):
        with Locations((-15.5, 43.7)):
            Circle(SKETCH_33_R)
        with Locations((-15.5, 25.5)):
            Circle(SKETCH_33_R)
    extrude(amount=-CUT_EXTRUDE_23_DEPTH, mode=Mode.SUBTRACT)

    # 草图38 → 凸台-拉伸2 (add)
    with BuildSketch(Plane.ZY.offset(-79.5)):
        with Locations((-25.367467029, 19.271158986)):
            Rectangle(SKETCH_38_W, SKETCH_38_H)
        with Locations((-25.702920085, 34.599521655)):
            Rectangle(SKETCH_38_W_2, SKETCH_38_H_2)
        with Locations((-25.457756412, 49.837946763)):
            Rectangle(SKETCH_38_W_3, SKETCH_38_H_3)
        with Locations((-24.90231743, 110.852030788)):
            Rectangle(SKETCH_38_W_4, SKETCH_38_H_4)
        with Locations((-24.990012804, 125.469998974)):
            Rectangle(SKETCH_38_W_5, SKETCH_38_H_5)
        with Locations((-25.410909742, 140.718956691)):
            Rectangle(SKETCH_38_W_6, SKETCH_38_H_6)
        with Locations((-23.06745835, 79.778951016)):
            Rectangle(SKETCH_38_W_7, SKETCH_38_H_7)
    extrude(amount=-EXTRUDE_2_DEPTH)

    # 草图39 → 切除-拉伸24 (cut)
    with BuildSketch(Plane.ZY.offset(-79.5)):
        with Locations((-32, 132)):
            Circle(SKETCH_39_R)
        with Locations((-32, 112)):
            Circle(SKETCH_39_R)
    extrude(amount=-CUT_EXTRUDE_24_DEPTH, mode=Mode.SUBTRACT)

    # 草图40 → 切除-拉伸25 (cut)
    with BuildSketch(Plane.ZY.offset(-79.5)):
        with Locations((-32, 28)):
            Circle(SKETCH_40_R)
        with Locations((-32, 48)):
            Circle(SKETCH_40_R)
    extrude(amount=-CUT_EXTRUDE_25_DEPTH, mode=Mode.SUBTRACT)

    # 草图41 → 切除-拉伸26 (cut)
    with BuildSketch(Plane.ZY.offset(-79.5)):
        with Locations((-32, 122)):
            Circle(SKETCH_41_R)
        with Locations((-32, 92)):
            Circle(SKETCH_41_R)
    extrude(amount=-CUT_EXTRUDE_26_DEPTH, mode=Mode.SUBTRACT)

    # 草图42 → 切除-拉伸27 (cut)
    with BuildSketch(Plane.ZY.offset(-79.5)):
        with Locations((-32, 38)):
            Circle(SKETCH_42_R)
        with Locations((-32, 68)):
            Circle(SKETCH_42_R)
    extrude(amount=-CUT_EXTRUDE_27_DEPTH, mode=Mode.SUBTRACT)

    # 草图44 → 切除-拉伸30 (cut, through all)
    with BuildSketch(Plane(origin=(82, 0, 0), x_dir=(0, 0, -1), z_dir=(1, 0, 0))):
        Polygon((0, 80), (0, 102.5), (24, 102.5), (24, 57.5), (0, 57.5), align=None)
    extrude(amount=-CUT_EXTRUDE_30_DEPTH, mode=Mode.SUBTRACT)


solid = part.part
